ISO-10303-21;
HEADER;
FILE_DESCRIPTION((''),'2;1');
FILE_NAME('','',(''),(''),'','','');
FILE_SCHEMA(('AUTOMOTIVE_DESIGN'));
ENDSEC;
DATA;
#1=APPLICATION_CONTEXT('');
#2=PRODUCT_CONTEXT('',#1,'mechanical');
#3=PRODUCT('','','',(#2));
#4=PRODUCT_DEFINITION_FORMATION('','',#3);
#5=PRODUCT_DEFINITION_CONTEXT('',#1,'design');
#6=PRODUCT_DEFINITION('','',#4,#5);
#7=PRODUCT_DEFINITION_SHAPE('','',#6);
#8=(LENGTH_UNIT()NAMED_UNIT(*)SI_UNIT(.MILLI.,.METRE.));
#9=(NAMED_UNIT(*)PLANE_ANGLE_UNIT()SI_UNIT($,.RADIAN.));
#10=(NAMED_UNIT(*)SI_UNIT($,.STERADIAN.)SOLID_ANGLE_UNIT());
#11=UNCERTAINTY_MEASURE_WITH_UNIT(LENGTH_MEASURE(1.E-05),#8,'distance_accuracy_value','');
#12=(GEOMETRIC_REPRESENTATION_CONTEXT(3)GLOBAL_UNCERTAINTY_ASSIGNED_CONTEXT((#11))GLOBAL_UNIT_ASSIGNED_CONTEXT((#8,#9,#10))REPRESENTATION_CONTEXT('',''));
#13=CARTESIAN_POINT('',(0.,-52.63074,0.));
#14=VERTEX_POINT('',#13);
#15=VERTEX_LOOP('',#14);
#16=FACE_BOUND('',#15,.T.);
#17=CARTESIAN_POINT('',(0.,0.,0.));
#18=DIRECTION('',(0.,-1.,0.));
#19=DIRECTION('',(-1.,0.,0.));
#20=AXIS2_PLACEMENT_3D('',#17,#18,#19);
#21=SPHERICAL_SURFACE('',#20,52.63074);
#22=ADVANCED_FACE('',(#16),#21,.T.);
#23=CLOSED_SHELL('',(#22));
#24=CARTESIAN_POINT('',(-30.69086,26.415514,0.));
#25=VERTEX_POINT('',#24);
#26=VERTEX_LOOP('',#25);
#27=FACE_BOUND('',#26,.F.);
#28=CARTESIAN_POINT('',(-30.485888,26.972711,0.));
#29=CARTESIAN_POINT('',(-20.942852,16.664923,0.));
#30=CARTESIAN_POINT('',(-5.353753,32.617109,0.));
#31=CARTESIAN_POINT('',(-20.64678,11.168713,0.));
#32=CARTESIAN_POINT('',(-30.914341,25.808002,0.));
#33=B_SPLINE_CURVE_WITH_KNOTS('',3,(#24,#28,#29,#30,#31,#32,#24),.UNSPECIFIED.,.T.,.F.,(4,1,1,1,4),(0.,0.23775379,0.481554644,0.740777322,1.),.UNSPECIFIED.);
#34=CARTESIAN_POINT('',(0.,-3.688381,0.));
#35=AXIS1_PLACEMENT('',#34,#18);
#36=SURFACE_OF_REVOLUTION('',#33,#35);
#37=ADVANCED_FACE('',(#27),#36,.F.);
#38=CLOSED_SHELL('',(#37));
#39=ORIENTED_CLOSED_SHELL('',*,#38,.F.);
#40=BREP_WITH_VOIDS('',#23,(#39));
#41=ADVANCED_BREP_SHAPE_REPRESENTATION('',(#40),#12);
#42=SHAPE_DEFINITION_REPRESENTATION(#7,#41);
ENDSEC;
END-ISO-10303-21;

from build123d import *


with BuildPart() as f1:
    # F0 (on Top) → F1 (revolve)
    with BuildSketch(Plane.XY):
        with BuildLine():
            Line((0, -20.0025010854), (0, 52.6307395417))
            ThreePointArc((0, 52.6307395417), (-52.6307395417, 0), (0, -52.6307395417))
            Line((0, -52.6307395417), (0, -31.9123864174))
            add(Edge.make_bspline(
                [(0, -20.0025010854), (-3.9136368815, -19.8816393155), (-11.5859052169, -24.8774979415), (-4.0797572166, -31.6953563982), (0, -31.9123864174)],
                knots=[0.5059560827, 0.5059560827, 0.5059560827, 0.5059560827, 0.7471541801, 1, 1, 1, 1], degree=3))
        make_face()
        with BuildLine():
            add(Edge.make_bspline(
                [(-30.6908600032, 26.4155138284), (-30.4858879067, 26.9727110738), (-20.9428519895, 16.6649230466), (-5.3537528092, 32.6171085054), (-20.6467803964, 11.1687129283), (-30.9143408398, 25.808002325), (-30.6908600032, 26.4155138284)],
                knots=[0, 0, 0, 0, 0.2377537895, 0.481554644, 0.740777322, 1, 1, 1, 1], degree=3))
        make_face(mode=Mode.SUBTRACT)
        with BuildLine():
            Line((0, -31.9123864174), (0, -20.0025010854))
            add(Edge.make_bspline(
                [(0, -20.0025010854), (-3.9136368815, -19.8816393155), (-11.5859052169, -24.8774979415), (-4.0797572166, -31.6953563982), (0, -31.9123864174)],
                knots=[0.5059560827, 0.5059560827, 0.5059560827, 0.5059560827, 0.7471541801, 1, 1, 1, 1], degree=3))
        make_face()
    revolve(axis=Axis((0, -3.6883809259, 0), (0, -1, 0)))


solid = f1.part
